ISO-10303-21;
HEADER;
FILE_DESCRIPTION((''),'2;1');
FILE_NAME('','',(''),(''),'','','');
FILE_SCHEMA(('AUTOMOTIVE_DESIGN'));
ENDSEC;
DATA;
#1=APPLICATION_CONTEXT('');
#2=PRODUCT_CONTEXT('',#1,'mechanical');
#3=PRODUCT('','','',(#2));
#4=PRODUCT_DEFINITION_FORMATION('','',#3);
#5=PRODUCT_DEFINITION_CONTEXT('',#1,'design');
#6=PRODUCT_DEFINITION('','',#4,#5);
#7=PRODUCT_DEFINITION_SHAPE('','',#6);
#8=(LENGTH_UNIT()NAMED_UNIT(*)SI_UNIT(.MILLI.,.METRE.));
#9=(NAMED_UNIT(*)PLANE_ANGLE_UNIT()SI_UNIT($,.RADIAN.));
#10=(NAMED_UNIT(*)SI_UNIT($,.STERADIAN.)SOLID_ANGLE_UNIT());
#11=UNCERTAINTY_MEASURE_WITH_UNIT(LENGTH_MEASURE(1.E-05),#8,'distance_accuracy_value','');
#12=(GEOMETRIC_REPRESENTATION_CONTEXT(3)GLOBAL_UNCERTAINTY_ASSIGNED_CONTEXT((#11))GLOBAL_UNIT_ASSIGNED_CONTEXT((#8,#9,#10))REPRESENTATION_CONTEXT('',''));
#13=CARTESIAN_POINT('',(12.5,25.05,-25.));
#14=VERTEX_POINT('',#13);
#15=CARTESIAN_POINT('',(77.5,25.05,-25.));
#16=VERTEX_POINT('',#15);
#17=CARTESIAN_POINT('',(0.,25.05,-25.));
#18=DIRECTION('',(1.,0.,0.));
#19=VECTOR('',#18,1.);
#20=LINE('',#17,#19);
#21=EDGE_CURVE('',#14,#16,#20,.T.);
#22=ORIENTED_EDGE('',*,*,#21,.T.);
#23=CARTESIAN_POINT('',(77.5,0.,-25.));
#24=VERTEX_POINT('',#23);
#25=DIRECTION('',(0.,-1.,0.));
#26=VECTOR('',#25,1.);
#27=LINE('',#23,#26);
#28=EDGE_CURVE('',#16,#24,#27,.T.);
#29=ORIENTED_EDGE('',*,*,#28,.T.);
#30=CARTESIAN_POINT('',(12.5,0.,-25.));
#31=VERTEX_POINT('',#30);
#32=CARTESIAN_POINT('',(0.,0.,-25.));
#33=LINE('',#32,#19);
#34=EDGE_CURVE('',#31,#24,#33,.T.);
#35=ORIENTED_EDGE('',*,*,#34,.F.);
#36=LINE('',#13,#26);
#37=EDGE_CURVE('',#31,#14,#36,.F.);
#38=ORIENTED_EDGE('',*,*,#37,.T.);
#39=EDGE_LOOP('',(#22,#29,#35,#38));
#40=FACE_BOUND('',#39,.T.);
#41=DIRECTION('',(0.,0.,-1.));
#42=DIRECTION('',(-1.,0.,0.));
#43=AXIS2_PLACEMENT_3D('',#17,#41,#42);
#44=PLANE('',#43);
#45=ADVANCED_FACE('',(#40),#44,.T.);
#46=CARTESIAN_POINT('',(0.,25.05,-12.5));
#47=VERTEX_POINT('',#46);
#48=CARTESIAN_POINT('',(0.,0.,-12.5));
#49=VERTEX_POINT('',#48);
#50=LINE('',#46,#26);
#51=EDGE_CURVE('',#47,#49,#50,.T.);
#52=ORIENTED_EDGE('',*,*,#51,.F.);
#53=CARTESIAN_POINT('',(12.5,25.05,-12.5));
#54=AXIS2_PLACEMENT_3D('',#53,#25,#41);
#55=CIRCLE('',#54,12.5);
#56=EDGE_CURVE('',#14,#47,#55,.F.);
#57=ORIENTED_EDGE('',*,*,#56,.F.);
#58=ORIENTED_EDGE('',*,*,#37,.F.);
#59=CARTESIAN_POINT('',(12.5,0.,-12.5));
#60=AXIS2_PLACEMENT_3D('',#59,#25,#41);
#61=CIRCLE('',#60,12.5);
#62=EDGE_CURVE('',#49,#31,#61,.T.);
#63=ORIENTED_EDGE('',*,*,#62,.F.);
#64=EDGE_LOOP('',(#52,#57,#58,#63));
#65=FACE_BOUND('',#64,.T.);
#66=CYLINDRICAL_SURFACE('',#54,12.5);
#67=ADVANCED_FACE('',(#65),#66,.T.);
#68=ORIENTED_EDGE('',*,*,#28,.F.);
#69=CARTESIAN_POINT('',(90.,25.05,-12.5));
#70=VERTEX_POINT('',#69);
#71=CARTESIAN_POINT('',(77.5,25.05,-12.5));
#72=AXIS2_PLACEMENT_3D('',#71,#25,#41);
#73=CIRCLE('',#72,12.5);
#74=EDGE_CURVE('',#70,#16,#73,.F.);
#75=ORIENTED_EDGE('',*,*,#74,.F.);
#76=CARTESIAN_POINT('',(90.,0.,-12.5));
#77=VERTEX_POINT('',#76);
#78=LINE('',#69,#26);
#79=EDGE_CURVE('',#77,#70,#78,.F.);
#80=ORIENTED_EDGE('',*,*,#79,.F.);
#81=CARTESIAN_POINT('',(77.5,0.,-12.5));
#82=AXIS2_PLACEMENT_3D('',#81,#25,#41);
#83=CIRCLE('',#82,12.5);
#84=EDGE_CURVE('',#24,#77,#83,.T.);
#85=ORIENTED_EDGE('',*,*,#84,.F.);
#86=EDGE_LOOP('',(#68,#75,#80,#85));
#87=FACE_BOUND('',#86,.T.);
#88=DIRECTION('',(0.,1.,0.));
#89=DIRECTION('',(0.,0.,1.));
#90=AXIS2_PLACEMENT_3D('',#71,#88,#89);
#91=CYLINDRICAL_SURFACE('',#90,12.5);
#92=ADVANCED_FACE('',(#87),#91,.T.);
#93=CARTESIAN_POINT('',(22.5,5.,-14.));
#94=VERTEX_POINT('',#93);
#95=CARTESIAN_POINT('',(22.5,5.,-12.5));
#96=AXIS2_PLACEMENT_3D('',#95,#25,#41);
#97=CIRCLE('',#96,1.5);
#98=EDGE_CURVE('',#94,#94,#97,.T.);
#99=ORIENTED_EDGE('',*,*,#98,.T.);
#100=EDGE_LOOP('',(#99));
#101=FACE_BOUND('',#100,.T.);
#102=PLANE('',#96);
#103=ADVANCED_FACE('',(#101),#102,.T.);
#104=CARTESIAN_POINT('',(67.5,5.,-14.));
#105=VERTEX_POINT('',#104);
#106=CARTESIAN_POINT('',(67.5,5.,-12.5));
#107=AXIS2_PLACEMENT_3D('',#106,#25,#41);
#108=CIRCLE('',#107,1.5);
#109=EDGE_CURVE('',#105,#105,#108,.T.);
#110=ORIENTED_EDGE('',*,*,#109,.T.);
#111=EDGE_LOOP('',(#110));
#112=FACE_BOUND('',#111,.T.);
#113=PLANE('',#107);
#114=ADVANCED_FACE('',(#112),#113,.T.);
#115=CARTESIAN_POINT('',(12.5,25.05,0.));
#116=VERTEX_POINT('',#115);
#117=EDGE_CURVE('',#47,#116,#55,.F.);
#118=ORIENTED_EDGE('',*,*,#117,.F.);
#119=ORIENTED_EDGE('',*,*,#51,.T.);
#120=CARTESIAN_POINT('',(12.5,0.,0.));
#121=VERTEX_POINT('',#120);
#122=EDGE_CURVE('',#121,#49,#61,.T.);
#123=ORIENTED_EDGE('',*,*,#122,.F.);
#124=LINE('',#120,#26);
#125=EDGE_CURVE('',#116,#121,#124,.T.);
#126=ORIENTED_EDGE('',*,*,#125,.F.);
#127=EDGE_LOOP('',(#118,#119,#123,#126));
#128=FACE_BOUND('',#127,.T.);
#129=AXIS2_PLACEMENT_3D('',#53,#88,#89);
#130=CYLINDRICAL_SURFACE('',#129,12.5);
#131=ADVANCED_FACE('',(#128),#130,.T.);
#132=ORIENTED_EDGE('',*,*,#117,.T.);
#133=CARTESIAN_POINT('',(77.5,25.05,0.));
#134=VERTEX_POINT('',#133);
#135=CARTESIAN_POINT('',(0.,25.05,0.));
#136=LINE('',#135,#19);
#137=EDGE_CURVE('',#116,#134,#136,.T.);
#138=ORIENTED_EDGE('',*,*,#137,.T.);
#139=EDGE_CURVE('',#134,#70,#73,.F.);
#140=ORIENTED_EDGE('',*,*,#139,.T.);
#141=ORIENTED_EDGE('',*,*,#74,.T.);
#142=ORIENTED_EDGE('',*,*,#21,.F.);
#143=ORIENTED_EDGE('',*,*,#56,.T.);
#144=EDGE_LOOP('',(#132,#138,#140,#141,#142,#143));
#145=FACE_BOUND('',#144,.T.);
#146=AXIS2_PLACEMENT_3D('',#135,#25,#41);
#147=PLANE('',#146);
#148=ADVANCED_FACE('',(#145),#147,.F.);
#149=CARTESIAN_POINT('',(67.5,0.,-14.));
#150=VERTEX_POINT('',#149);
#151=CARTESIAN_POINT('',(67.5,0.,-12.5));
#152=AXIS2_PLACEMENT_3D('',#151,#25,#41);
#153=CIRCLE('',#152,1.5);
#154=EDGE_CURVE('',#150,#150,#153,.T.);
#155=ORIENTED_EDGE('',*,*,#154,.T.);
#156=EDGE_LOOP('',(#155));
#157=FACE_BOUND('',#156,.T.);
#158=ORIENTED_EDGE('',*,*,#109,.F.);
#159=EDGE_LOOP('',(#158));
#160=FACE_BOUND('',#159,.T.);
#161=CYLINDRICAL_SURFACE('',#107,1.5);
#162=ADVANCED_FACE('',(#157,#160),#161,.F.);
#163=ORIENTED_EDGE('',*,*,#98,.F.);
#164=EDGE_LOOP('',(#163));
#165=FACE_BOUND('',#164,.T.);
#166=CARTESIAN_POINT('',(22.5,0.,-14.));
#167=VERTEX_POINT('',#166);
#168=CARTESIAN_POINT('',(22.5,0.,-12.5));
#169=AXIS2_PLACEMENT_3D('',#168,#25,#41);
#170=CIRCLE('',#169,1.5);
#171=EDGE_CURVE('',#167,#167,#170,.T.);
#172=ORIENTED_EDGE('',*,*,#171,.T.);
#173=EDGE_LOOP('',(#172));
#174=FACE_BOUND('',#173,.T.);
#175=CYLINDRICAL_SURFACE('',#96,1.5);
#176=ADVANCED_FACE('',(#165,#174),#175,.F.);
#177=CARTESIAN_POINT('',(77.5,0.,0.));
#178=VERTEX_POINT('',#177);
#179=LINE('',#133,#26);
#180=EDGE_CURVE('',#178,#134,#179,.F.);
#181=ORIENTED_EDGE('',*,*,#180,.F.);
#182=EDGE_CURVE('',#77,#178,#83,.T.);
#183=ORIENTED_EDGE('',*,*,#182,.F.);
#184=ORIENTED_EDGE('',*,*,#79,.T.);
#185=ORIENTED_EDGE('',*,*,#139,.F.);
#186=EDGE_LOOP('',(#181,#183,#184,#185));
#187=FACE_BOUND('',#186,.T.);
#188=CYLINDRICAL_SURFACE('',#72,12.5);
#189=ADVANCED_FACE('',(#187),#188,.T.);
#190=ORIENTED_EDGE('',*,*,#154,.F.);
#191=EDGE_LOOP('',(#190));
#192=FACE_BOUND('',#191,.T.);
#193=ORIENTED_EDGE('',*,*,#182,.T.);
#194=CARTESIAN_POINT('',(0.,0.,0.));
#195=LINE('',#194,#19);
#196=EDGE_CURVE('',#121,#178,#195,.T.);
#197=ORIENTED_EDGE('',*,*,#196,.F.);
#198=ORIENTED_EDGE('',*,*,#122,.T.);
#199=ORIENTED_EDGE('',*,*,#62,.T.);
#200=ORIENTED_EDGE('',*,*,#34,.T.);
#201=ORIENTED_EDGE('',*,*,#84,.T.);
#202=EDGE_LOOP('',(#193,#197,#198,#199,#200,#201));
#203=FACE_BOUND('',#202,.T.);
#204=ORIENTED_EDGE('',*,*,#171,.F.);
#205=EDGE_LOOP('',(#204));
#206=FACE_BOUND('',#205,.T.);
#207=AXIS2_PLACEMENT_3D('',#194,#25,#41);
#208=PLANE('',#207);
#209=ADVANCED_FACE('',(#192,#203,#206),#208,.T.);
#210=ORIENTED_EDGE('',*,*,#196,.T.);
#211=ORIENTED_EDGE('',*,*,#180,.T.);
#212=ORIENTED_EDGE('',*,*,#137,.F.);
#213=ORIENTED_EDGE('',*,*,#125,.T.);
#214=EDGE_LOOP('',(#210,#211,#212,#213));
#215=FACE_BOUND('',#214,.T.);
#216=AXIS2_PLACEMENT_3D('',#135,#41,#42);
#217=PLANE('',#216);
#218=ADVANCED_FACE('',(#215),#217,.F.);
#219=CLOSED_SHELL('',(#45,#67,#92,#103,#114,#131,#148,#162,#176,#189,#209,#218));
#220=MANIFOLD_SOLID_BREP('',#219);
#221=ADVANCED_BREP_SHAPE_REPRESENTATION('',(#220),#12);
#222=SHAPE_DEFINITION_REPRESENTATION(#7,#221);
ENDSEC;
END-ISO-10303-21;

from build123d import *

# Parameters (mm, degrees)
SKETCH1_W           = 90
SKETCH1_H           = 25
BOSS_EXTRUDE1_DEPTH = 25.05
FILLET1_R           = 12.5
SKETCH2_R           = 1.5
CUT_EXTRUDE1_DEPTH  = 5


with BuildPart() as part:
    # Sketch1 → Boss-Extrude1 (new body)
    with BuildSketch(Plane(origin=(0, 0, 0), x_dir=(1, 0, 0), z_dir=(0, 1, 0))):
        with Locations((45, 12.5)):
            Rectangle(SKETCH1_W, SKETCH1_H)
    extrude(amount=BOSS_EXTRUDE1_DEPTH)

    # Fillet1
    fillet1_edges = [part.edges().sort_by_distance(p)[0] for p in [
        (90, 12.525, 0),
        (90, 12.525, -25),
        (0, 12.525, 0),
        (0, 12.525, -25),
    ]]
    fillet(fillet1_edges, radius=FILLET1_R - 0.0001)  # a hair under: the kernel refuses the full size

    # Sketch2 → Cut-Extrude1 (cut)
    with BuildSketch(Plane.XZ):
        with Locations(Location((22.5, -12.5, 0), (0, 0, 270))):
            Circle(SKETCH2_R)
        with Locations(Location((67.5, -12.5, 0), (0, 0, 270))):
            Circle(SKETCH2_R)
    extrude(amount=-CUT_EXTRUDE1_DEPTH, mode=Mode.SUBTRACT)


solid = part.part
